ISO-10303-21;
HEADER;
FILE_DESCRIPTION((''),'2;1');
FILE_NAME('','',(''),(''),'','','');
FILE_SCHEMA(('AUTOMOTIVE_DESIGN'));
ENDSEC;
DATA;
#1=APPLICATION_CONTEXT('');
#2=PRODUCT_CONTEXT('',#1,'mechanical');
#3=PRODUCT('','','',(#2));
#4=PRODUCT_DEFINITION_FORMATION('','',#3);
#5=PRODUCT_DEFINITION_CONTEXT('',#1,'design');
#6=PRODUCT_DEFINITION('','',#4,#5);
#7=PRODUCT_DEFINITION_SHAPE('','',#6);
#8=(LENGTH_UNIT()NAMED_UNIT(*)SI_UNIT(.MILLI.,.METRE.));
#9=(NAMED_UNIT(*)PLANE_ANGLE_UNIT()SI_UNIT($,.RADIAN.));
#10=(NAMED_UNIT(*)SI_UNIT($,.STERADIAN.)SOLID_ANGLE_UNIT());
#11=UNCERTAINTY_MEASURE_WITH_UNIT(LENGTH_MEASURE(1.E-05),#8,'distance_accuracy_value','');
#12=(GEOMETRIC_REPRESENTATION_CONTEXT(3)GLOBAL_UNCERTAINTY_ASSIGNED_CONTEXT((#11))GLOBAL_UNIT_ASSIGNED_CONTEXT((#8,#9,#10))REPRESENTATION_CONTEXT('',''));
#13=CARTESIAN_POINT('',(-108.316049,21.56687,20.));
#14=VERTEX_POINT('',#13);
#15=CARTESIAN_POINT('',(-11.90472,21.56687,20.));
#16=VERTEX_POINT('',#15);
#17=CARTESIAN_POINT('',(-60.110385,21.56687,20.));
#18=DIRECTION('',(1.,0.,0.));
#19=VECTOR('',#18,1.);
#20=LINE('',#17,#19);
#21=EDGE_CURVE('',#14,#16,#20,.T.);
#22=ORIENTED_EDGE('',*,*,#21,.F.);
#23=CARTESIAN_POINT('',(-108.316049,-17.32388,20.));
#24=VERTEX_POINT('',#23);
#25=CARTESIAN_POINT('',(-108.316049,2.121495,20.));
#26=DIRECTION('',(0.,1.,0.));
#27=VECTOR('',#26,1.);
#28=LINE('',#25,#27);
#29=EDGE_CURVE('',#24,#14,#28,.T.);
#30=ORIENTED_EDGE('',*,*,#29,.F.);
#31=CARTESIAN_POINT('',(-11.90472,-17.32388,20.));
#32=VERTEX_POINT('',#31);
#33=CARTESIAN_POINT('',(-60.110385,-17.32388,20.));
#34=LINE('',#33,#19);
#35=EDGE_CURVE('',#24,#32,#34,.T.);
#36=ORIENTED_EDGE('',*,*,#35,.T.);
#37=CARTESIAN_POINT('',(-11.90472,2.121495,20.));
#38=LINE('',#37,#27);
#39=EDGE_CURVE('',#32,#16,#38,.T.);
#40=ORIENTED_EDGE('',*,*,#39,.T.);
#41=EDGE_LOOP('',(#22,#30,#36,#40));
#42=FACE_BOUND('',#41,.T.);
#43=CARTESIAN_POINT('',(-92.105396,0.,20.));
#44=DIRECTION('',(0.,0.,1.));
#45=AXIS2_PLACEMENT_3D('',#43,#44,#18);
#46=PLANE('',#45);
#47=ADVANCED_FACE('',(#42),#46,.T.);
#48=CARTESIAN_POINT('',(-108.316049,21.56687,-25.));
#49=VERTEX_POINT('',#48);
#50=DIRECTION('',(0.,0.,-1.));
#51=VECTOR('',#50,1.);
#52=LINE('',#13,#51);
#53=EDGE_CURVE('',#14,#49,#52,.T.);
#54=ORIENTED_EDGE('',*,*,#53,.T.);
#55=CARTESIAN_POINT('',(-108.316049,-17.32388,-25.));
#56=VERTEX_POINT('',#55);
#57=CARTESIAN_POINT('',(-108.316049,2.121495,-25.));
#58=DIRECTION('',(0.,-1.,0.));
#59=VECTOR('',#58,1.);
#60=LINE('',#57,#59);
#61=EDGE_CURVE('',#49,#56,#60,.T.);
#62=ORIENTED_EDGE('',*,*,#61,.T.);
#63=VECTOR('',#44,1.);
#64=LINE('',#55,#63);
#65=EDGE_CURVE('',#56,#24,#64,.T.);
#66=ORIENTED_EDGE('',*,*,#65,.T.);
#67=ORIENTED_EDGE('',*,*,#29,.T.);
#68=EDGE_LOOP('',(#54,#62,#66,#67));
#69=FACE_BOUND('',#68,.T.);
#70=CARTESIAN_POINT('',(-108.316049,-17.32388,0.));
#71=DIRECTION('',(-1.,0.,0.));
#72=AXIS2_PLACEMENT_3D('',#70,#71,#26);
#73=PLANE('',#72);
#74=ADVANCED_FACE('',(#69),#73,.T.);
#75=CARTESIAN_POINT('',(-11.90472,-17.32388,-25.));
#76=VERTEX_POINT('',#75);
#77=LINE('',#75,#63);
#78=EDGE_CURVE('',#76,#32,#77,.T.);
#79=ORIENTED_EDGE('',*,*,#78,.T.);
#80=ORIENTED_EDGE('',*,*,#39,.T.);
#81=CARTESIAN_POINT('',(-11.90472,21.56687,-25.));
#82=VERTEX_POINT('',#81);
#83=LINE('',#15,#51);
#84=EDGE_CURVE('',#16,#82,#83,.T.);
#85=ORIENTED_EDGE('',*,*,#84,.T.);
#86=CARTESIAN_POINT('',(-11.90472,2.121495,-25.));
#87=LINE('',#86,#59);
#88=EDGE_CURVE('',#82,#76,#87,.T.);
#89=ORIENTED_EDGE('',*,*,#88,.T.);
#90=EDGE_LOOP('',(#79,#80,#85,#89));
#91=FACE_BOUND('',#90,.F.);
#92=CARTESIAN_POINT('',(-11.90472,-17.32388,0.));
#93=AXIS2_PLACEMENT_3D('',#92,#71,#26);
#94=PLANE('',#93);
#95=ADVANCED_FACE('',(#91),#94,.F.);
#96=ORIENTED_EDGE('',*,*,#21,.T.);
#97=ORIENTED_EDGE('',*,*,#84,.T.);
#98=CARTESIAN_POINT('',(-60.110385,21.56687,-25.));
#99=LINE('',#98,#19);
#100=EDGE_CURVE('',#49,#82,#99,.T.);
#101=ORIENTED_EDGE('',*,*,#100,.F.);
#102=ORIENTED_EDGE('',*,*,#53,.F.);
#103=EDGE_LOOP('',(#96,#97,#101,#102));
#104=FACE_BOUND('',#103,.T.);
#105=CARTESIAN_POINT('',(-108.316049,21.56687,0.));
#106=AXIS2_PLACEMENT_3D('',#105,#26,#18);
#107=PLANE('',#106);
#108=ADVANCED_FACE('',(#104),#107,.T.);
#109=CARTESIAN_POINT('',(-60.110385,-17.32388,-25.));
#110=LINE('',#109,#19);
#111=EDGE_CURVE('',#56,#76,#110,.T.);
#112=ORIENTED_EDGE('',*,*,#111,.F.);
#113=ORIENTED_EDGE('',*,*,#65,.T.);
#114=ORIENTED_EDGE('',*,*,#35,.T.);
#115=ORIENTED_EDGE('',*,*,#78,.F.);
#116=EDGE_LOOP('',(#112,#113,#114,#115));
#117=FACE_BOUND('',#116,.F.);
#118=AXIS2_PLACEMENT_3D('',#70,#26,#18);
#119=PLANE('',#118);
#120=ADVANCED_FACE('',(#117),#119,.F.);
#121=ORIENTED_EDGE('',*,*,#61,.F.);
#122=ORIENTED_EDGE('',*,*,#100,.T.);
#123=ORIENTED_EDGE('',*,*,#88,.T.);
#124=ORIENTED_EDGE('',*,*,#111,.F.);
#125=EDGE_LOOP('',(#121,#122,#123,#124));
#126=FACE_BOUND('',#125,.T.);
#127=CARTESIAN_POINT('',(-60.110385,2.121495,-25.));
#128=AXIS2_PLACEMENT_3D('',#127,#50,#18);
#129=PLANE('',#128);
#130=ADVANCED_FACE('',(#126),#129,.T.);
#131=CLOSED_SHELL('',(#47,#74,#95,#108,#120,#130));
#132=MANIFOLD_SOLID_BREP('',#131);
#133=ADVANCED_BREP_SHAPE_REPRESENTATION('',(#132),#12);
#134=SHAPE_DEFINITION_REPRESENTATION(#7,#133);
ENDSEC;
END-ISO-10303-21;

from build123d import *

# Parameters (mm, degrees)
F0_W       = 96.4113287628
F0_H       = 38.8907492161
F1_DEPTH   = 20
F2_R       = 6.9057023469
F1_FACE1_W = 96.4113287628
F1_FACE1_H = 38.8907492161
F3_DEPTH   = 25


with BuildPart() as f1:
    # F0 (on Top) → F1 (new body)
    with BuildSketch(Plane.XY):
        with Locations((-60.1103845984, 2.121495083)):
            Rectangle(F0_W, F0_H)
    extrude(amount=F1_DEPTH)

    # F2 (on face) + F1_face1 (on face) → F3 (join)
    with BuildSketch(Plane.XY.offset(20)):
        with Locations((-92.1053960919, 0)):
            Circle(F2_R)
    with BuildSketch(Plane(origin=(-60.1103845984, 2.121495083, 0), x_dir=(1, 0, 0), z_dir=(0, 0, -1))):
        Rectangle(F1_FACE1_W, F1_FACE1_H)
    extrude(amount=-F3_DEPTH, dir=(0, 0, 1))


solid = f1.part
